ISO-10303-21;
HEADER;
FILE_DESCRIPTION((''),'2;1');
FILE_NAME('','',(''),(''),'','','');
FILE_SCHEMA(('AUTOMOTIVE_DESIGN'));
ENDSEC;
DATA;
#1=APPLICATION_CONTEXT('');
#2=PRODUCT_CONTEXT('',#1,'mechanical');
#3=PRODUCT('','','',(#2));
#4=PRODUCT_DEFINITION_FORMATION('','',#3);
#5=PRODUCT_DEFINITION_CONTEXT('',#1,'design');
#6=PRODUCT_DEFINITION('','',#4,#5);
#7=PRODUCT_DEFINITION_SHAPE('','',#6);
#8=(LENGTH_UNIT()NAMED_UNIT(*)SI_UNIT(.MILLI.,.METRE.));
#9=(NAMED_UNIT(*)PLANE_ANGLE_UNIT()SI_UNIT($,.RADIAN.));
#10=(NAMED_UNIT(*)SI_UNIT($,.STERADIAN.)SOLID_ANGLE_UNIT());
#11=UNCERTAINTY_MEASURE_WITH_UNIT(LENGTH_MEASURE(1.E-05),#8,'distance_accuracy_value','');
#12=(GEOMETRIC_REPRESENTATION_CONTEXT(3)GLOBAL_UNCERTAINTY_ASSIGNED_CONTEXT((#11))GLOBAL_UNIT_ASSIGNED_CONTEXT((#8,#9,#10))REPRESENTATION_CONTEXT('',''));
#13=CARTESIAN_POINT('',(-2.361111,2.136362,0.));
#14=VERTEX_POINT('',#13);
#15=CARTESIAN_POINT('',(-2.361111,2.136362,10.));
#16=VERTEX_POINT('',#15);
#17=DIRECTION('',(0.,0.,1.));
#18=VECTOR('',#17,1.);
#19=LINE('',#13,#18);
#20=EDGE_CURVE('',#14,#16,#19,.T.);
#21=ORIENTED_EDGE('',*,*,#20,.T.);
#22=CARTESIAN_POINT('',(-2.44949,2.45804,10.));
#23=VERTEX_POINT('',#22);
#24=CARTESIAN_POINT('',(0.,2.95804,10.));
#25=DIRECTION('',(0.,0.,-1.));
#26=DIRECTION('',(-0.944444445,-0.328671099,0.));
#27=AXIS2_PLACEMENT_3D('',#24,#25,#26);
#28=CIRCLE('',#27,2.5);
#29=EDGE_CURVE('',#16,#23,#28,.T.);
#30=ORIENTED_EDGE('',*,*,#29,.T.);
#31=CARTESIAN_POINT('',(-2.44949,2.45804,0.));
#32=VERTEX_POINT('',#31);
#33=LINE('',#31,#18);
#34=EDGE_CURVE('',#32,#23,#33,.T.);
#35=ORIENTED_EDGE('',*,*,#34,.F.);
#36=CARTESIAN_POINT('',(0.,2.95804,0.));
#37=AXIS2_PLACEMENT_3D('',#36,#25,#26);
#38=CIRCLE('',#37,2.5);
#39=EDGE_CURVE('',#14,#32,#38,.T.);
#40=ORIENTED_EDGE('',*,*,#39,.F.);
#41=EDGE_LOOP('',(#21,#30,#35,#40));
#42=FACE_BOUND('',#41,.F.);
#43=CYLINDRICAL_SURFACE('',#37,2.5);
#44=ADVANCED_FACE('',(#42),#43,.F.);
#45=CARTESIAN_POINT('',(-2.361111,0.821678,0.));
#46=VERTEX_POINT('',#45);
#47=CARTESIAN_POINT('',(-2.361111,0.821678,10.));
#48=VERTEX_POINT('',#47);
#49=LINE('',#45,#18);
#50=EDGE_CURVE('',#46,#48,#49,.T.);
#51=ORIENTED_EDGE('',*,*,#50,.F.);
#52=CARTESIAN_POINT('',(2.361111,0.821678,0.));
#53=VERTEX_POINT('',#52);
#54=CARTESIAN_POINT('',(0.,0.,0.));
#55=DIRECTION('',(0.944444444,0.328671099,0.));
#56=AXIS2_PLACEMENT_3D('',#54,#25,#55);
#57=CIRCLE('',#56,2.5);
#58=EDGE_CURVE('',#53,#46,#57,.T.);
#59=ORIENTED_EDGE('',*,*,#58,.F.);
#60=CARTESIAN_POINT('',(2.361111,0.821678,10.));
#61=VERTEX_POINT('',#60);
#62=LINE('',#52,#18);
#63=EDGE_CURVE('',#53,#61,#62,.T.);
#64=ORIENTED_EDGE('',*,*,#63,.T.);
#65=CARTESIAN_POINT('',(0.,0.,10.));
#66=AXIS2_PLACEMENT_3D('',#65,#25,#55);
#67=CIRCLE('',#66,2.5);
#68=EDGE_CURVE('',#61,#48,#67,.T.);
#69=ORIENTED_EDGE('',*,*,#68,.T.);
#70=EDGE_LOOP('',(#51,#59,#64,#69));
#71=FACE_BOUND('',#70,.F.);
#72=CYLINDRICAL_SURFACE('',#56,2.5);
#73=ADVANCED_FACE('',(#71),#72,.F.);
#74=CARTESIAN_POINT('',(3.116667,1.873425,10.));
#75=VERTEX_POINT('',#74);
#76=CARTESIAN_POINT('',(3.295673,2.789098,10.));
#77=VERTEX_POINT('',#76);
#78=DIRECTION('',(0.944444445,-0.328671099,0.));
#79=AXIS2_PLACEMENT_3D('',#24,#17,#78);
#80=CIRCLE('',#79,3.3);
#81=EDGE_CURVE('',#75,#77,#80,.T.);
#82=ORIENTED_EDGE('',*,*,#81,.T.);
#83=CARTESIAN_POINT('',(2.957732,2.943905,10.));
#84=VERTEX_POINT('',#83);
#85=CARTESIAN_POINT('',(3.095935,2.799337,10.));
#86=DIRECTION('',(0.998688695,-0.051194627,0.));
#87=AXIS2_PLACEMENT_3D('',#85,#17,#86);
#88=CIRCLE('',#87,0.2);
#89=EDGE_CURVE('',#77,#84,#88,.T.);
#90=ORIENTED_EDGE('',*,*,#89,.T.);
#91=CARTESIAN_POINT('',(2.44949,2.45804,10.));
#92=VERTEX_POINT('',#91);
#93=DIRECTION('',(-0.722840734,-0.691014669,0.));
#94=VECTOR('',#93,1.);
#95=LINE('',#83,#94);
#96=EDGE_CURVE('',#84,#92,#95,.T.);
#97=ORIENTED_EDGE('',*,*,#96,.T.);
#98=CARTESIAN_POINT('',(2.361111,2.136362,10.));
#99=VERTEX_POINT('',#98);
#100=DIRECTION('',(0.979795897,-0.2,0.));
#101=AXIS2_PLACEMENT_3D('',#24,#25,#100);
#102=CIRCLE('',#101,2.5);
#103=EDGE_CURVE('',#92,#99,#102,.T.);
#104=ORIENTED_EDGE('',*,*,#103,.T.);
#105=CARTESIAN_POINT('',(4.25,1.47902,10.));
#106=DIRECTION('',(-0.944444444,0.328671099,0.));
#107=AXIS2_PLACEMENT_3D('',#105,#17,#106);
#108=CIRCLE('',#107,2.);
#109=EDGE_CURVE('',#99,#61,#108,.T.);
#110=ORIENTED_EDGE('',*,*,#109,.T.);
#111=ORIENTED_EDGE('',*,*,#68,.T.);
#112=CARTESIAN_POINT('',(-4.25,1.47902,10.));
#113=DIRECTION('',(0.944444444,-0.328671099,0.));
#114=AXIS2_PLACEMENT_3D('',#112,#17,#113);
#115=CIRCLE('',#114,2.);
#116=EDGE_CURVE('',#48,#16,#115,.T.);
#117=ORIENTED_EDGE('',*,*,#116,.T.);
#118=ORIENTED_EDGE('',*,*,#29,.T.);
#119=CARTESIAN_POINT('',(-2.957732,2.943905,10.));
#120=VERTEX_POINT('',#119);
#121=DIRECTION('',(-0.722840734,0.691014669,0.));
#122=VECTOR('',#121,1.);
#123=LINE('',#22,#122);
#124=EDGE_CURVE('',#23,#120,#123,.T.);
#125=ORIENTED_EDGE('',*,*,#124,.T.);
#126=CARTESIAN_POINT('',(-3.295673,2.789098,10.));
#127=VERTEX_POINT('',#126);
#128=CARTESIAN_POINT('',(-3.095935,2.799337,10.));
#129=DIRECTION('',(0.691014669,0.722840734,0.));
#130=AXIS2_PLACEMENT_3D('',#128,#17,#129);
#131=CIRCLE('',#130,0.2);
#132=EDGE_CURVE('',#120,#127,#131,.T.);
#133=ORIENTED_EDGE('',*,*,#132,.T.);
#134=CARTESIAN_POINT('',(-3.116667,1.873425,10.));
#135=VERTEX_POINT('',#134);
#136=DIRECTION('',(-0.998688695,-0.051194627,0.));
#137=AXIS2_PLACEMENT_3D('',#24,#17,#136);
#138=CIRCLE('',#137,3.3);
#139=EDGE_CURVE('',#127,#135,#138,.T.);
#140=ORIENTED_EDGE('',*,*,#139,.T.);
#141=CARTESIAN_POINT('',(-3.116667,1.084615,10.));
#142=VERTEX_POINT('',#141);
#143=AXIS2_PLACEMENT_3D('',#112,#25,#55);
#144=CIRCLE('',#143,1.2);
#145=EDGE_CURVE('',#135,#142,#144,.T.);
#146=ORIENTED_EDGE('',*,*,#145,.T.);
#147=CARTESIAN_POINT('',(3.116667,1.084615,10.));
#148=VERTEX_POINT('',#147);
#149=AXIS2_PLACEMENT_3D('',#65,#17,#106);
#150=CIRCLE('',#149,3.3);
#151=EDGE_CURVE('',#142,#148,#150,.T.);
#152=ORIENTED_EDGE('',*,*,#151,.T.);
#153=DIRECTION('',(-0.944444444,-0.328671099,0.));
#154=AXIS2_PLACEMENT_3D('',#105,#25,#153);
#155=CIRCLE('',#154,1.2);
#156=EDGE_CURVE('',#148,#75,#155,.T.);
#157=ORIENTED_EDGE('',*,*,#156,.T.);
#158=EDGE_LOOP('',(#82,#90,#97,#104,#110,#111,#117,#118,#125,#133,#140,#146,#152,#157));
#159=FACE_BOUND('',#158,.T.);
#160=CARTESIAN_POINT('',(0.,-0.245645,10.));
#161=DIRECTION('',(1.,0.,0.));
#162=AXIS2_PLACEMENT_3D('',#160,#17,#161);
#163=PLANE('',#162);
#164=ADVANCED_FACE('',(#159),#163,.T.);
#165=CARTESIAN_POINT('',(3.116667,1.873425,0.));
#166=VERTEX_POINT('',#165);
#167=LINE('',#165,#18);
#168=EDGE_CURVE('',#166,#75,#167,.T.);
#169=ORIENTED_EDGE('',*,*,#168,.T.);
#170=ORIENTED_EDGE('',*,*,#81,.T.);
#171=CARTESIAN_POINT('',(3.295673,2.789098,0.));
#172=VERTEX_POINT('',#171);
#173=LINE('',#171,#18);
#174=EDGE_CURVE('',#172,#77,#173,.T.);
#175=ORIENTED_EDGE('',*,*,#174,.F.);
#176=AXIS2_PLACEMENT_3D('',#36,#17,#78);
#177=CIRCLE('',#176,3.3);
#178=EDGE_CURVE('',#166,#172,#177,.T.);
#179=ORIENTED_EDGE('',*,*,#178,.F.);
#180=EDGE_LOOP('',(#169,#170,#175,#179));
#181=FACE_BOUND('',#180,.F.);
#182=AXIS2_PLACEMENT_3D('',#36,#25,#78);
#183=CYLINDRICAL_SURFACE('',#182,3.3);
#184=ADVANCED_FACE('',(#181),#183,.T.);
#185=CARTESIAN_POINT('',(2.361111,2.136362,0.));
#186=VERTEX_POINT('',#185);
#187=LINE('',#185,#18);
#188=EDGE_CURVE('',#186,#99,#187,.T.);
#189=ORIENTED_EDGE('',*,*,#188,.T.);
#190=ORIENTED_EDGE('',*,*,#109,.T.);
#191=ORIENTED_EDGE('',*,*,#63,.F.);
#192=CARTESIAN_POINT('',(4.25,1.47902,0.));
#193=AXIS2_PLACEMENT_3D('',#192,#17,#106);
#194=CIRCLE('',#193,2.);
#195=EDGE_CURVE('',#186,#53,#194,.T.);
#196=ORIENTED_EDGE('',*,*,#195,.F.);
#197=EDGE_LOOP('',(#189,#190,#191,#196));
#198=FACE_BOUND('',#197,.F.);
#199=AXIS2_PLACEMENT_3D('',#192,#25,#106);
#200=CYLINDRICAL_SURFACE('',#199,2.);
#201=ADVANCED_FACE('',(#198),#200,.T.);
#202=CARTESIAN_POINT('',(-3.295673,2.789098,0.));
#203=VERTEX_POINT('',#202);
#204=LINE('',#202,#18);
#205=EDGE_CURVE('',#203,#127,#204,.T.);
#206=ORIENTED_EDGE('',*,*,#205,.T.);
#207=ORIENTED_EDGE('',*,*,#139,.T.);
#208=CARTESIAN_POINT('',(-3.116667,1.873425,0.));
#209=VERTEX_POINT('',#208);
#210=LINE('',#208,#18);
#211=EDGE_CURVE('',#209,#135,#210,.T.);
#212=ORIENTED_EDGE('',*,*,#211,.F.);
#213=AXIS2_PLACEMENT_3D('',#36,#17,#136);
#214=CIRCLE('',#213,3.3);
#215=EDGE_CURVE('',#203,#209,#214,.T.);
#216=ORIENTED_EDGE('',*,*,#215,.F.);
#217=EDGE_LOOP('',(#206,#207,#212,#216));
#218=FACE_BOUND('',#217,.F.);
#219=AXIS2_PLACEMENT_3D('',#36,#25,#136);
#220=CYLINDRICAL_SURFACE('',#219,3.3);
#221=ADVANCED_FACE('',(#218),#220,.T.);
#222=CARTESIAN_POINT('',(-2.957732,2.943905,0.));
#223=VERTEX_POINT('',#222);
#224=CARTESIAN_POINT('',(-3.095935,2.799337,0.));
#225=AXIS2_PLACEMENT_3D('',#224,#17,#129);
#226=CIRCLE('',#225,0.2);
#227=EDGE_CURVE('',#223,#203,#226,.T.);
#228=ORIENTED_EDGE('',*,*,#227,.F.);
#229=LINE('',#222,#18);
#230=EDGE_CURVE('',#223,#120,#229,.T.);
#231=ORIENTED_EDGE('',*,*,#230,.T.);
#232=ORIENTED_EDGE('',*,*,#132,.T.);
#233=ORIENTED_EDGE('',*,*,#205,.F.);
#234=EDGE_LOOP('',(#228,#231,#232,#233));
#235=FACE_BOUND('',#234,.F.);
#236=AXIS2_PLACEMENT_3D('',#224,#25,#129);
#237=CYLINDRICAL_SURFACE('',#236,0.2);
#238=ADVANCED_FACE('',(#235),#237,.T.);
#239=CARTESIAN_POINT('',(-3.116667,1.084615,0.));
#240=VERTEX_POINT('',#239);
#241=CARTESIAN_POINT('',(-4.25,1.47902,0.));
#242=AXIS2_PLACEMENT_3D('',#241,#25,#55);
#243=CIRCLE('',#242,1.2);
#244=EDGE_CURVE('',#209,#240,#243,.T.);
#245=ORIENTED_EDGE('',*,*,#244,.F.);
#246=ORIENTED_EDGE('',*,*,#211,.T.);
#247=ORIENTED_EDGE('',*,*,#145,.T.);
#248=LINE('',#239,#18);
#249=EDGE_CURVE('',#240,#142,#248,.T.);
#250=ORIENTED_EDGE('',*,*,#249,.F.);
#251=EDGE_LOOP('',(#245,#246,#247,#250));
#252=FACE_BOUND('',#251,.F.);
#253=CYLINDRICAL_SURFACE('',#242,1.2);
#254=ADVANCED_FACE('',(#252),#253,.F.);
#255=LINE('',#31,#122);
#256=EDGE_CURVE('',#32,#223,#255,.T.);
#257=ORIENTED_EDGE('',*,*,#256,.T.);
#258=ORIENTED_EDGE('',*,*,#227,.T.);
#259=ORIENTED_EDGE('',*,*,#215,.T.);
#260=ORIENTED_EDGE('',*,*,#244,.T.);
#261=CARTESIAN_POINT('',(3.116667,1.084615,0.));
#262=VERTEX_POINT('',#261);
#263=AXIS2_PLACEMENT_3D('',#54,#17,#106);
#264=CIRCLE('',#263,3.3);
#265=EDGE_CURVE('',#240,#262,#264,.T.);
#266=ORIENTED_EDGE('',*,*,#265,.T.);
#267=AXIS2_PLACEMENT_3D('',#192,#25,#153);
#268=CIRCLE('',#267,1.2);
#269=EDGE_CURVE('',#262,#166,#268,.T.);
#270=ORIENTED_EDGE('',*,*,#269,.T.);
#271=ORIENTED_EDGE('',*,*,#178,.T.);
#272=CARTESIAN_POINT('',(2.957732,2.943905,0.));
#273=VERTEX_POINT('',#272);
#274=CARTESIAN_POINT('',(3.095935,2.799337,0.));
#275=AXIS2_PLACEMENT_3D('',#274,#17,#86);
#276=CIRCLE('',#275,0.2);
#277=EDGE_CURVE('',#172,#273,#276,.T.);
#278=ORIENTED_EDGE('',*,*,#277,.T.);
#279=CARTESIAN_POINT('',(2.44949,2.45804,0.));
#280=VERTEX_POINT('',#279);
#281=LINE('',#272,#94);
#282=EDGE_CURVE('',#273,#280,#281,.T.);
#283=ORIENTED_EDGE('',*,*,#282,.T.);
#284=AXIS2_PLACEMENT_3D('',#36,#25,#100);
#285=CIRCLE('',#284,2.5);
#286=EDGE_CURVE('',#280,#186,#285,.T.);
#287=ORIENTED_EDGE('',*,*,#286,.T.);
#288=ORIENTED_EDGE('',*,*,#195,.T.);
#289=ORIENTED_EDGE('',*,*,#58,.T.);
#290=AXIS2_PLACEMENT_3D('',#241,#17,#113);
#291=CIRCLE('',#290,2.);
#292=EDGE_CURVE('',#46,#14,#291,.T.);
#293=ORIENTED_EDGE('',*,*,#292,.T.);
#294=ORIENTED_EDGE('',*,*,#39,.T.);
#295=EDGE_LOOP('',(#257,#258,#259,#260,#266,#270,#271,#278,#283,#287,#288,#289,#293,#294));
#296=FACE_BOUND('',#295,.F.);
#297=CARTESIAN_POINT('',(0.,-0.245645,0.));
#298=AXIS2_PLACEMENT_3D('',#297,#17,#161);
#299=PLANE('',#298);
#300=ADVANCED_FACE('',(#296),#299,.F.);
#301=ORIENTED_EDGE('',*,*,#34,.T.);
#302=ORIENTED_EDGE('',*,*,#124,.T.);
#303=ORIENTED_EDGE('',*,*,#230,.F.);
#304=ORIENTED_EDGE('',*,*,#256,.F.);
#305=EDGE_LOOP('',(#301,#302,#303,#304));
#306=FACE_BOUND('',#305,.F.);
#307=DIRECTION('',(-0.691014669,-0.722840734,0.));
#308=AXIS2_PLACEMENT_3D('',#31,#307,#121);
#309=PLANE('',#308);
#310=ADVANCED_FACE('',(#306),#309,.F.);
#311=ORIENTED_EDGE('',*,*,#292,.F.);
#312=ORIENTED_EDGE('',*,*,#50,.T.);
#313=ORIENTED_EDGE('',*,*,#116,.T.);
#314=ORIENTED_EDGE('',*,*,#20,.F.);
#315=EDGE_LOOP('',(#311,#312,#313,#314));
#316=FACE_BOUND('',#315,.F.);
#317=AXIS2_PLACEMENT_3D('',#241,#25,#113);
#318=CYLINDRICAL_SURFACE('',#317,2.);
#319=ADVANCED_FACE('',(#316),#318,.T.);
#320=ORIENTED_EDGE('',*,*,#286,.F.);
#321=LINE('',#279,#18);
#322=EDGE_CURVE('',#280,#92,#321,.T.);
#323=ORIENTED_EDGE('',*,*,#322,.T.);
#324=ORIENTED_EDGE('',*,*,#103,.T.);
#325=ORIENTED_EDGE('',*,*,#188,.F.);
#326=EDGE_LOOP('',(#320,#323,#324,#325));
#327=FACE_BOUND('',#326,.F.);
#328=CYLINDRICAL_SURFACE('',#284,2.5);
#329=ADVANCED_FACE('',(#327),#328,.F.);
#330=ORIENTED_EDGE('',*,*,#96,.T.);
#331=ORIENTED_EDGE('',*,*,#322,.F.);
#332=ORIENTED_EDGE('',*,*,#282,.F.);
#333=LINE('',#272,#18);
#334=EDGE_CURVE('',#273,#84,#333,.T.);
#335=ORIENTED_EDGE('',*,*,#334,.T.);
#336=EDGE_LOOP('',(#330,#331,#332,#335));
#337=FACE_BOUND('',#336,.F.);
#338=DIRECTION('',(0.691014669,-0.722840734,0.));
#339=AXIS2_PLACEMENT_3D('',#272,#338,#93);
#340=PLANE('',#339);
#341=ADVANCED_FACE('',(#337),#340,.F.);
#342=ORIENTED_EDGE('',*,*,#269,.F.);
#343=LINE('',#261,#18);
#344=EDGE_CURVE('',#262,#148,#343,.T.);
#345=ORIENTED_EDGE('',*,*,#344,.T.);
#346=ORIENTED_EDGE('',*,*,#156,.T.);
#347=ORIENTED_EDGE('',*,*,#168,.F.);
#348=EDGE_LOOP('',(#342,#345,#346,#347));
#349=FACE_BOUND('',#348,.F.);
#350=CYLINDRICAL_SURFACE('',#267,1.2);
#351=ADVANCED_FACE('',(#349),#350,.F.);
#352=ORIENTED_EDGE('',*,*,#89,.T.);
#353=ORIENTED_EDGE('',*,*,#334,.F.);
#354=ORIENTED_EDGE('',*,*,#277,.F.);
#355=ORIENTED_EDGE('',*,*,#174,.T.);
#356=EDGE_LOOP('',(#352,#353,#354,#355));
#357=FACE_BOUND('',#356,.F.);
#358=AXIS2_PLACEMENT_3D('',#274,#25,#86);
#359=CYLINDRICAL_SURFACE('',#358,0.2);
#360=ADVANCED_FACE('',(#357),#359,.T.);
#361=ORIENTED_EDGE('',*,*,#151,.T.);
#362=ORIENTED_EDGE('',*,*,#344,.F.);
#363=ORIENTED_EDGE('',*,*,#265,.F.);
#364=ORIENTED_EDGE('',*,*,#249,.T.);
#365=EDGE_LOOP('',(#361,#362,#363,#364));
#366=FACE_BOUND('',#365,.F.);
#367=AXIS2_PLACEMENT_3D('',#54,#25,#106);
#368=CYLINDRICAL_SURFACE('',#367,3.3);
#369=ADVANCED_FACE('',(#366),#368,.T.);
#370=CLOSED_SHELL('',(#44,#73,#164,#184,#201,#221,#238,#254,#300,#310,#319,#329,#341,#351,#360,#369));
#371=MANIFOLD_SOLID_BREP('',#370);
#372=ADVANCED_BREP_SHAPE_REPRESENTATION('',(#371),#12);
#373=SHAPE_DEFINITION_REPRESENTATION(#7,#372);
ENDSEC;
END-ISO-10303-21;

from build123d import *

# Parameters (mm, degrees)
F1_DEPTH = 10


# Not quite as in the source:
# - a feature names something its author has since deleted; it is built from what else it names


with BuildPart() as f1:
    # F0 (on Top) → F1 (new body)
    with BuildSketch(Plane.XY):
        with BuildLine():
            ThreePointArc((2.3611111111, 0.8216777477), (0, -2.5), (-2.3611111111, 0.8216777477))
            ThreePointArc((-2.3611111111, 0.8216777477), (-2.25, 1.4790199458), (-2.3611111111, 2.1363621439))
            ThreePointArc((-2.3611111111, 2.1363621439), (-2.4106719576, 2.2957252286), (-2.4494897428, 2.4580398915))
            Line((-2.4494897428, 2.4580398915), (-2.9577320216, 2.9439046938))
            ThreePointArc((-2.9577320216, 2.9439046938), (-3.1792292558, 2.9811663012), (-3.2956726945, 2.7890976215))
            ThreePointArc((-3.2956726945, 2.7890976215), (-3.2386938705, 2.3249032452), (-3.1166666667, 1.8734252646))
            ThreePointArc((-3.1166666667, 1.8734252646), (-3.05, 1.4790199458), (-3.1166666667, 1.0846146269))
            ThreePointArc((-3.1166666667, 1.0846146269), (0, -3.3), (3.1166666667, 1.0846146269))
            ThreePointArc((3.1166666667, 1.0846146269), (3.05, 1.4790199458), (3.1166666667, 1.8734252646))
            ThreePointArc((3.1166666667, 1.8734252646), (3.2386938705, 2.3249032452), (3.2956726945, 2.7890976215))
            ThreePointArc((3.2956726945, 2.7890976215), (3.1792292558, 2.9811663012), (2.9577320216, 2.9439046938))
            Line((2.9577320216, 2.9439046938), (2.4494897428, 2.4580398915))
            ThreePointArc((2.4494897428, 2.4580398915), (2.4106719576, 2.2957252286), (2.3611111111, 2.1363621439))
            ThreePointArc((2.3611111111, 2.1363621439), (2.25, 1.4790199458), (2.3611111111, 0.8216777477))
        make_face()
    extrude(amount=F1_DEPTH)


solid = f1.part
